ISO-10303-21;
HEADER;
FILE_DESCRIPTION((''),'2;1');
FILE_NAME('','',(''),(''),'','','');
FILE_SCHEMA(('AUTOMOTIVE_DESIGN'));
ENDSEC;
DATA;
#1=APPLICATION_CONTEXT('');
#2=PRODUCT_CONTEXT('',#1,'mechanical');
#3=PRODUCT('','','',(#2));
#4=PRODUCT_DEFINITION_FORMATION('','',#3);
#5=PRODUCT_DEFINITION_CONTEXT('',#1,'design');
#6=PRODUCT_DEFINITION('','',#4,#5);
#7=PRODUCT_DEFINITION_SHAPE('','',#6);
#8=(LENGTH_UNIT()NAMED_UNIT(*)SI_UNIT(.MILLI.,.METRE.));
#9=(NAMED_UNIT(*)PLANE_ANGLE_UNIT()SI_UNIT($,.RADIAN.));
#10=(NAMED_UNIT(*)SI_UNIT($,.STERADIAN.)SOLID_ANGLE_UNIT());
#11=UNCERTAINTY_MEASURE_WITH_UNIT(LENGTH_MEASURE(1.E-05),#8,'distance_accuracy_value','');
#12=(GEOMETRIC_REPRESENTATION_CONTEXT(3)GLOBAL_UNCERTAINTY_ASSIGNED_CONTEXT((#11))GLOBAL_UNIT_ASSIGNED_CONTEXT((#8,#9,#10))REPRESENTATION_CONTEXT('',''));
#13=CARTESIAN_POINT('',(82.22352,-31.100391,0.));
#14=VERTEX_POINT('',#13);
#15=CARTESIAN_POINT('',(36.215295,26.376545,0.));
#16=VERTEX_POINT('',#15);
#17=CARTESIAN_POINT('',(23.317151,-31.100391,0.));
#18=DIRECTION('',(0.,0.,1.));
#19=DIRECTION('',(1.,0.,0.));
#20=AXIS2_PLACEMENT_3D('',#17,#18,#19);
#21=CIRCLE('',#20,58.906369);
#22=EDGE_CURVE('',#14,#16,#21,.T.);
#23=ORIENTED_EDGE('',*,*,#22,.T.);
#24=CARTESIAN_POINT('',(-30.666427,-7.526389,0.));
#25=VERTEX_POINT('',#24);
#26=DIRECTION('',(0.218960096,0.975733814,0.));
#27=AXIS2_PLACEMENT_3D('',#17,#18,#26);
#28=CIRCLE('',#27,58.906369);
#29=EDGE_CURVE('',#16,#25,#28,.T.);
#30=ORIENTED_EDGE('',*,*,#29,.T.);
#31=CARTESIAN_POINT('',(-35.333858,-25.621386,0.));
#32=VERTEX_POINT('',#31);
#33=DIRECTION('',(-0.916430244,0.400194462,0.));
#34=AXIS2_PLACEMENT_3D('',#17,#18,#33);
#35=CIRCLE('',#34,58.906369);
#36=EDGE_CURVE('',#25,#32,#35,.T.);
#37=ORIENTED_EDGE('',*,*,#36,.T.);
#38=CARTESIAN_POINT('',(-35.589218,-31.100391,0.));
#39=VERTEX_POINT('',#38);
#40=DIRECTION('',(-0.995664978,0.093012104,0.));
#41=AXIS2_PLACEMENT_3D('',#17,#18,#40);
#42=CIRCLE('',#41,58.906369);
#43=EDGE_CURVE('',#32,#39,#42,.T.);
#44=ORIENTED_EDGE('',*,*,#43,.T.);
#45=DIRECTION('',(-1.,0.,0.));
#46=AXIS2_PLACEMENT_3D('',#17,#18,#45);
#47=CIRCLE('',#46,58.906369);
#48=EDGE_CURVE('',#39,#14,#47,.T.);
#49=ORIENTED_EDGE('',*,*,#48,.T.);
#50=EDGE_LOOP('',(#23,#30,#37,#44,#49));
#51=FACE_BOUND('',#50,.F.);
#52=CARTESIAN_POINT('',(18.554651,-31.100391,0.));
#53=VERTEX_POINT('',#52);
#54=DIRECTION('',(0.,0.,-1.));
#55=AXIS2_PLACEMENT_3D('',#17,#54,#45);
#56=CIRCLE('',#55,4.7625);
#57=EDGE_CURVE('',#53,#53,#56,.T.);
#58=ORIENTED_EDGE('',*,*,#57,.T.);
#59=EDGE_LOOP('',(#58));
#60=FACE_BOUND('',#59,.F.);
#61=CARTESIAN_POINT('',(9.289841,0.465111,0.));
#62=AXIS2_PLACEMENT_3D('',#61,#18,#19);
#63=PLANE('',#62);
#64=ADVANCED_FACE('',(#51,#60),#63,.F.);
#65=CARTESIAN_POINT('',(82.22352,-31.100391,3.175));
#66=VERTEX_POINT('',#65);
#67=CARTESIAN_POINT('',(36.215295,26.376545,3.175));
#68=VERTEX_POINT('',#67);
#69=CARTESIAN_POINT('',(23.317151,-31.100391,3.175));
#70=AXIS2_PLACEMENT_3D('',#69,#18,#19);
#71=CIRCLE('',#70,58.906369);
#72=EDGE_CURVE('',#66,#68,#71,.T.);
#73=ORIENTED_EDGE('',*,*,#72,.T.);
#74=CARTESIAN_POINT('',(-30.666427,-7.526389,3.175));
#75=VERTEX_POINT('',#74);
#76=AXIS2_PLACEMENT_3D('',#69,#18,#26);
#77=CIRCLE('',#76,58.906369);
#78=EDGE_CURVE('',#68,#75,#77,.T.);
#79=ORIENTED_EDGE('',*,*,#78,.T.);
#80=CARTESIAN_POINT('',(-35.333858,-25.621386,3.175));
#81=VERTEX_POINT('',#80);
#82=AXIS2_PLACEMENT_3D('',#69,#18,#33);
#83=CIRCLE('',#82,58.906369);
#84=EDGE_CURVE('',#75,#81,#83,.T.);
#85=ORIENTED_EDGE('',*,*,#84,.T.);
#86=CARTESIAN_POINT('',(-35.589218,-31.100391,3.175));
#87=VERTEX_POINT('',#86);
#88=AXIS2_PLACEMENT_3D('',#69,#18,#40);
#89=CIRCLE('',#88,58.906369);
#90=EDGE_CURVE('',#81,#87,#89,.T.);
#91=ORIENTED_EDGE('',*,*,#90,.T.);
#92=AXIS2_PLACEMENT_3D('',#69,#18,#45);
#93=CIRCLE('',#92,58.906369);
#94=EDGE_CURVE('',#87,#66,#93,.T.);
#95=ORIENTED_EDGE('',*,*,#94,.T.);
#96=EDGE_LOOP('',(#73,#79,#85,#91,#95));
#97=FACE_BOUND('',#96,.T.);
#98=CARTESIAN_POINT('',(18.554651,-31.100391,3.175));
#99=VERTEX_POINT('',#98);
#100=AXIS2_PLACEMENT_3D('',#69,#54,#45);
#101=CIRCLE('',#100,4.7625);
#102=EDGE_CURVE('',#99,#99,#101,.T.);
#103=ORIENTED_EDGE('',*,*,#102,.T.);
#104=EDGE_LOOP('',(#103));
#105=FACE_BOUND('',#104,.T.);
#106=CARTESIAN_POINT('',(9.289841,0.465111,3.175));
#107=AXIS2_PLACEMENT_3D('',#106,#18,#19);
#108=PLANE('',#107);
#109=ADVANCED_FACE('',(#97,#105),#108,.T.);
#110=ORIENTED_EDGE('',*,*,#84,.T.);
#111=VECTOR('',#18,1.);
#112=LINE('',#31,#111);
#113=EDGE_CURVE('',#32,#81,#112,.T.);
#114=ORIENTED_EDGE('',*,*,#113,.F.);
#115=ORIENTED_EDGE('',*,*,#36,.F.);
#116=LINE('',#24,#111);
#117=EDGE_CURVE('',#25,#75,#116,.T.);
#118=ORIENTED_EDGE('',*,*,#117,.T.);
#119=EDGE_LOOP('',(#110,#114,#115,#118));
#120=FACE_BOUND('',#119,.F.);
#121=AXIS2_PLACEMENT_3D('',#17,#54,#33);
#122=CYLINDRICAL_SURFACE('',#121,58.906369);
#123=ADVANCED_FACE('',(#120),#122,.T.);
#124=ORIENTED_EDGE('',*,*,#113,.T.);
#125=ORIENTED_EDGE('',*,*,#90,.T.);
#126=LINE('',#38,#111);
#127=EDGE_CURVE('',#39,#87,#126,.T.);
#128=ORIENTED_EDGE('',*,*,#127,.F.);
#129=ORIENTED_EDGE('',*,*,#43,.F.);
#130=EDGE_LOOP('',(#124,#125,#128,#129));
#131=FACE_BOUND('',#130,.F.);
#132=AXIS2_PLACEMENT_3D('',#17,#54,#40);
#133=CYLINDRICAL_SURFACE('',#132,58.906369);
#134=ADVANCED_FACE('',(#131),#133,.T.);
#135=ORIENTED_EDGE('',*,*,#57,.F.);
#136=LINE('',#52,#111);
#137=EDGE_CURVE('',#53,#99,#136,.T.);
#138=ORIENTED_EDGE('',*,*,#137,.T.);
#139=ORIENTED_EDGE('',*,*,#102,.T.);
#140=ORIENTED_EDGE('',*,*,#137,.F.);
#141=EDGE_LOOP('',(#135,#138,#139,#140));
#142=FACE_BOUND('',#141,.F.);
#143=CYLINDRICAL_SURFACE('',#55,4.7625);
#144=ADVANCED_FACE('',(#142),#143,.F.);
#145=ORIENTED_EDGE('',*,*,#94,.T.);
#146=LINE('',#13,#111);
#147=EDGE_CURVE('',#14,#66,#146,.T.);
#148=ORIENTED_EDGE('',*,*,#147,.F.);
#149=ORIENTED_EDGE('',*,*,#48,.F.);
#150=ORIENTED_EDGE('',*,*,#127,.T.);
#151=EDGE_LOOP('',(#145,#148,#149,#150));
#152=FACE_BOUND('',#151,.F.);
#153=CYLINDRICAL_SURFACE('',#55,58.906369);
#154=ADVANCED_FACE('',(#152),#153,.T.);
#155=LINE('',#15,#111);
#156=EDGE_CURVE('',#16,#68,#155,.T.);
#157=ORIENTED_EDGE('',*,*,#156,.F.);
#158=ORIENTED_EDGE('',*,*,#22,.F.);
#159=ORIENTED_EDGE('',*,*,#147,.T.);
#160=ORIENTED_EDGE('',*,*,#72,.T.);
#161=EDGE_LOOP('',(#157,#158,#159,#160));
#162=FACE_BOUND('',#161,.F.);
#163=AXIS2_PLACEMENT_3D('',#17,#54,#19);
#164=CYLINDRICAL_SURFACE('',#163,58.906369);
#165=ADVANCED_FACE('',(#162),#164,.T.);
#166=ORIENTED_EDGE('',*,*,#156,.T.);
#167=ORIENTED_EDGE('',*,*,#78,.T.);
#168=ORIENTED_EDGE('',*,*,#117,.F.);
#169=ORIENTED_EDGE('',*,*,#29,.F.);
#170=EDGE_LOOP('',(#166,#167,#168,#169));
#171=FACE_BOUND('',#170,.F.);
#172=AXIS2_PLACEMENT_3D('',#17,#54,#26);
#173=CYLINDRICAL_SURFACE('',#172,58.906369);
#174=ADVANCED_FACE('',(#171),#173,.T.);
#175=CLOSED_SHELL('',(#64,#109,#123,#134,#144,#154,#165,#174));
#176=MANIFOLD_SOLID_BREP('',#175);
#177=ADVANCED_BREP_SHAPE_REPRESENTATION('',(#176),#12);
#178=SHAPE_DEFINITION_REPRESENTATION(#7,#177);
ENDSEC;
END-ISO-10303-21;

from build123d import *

# Parameters (mm, degrees)
F1_DEPTH = 3.175


# Not quite as in the source:
# - a length typed as a fraction of an inch, garbled in the dataset ("3 / 203.2 mm" for 3/8 in), is restored
# - a feature names something its author has since deleted; it is built from what else it names


with BuildPart() as f1:
    # F0 (on Top) → F1 (new body)
    with BuildSketch(Plane.XY):
        with BuildLine():
            Line((-12.6873488794, 5.5338457858), (-12.6873488794, -31.1003914823))
            ThreePointArc((-12.6873488794, -31.1003914823), (16.4381102813, -21.6348312874), (34.4341148999, 3.1448583573))
            ThreePointArc((34.4341148999, 3.1448583573), (36.2459189148, 10.6981520789), (36.8548431206, 18.4418005177))
            ThreePointArc((36.8548431206, 18.4418005177), (36.6946973558, 22.4220389265), (36.2152954077, 26.3765449929))
            ThreePointArc((36.2152954077, 26.3765449929), (10.5526750719, 26.4063777177), (-12.6873488794, 15.5218814393))
            Line((-12.6873488794, 15.5218814393), (-12.6873488794, 5.5338457858))
        make_face()
        with BuildLine():
            ThreePointArc((34.4341148999, 3.1448583573), (44.4839092315, -60.225850643), (-12.6873488794, -31.1003914823))
            Line((-12.6873488794, -31.1003914823), (-35.5892182517, -31.1003914823))
            ThreePointArc((-35.5892182517, -31.1003914823), (23.3171511206, -90.0067608546), (82.2235204929, -31.1003914823))
            ThreePointArc((82.2235204929, -31.1003914823), (69.3048842905, 5.7111386477), (36.2152954077, 26.3765449929))
            ThreePointArc((36.2152954077, 26.3765449929), (36.6946973558, 22.4220389265), (36.8548431206, 18.4418005177))
            ThreePointArc((36.8548431206, 18.4418005177), (36.2459189148, 10.6981520789), (34.4341148999, 3.1448583573))
        make_face()
        with BuildLine():
            ThreePointArc((34.4341148999, 3.1448583573), (16.4381102813, -21.6348312874), (-12.6873488794, -31.1003914823))
            ThreePointArc((-12.6873488794, -31.1003914823), (44.4839092315, -60.225850643), (34.4341148999, 3.1448583573))
        make_face()
        with BuildLine():
            ThreePointArc((28.0796511206, -31.1003914823), (23.3171511206, -35.8628914823), (18.5546511206, -31.1003914823))
            ThreePointArc((18.5546511206, -31.1003914823), (23.3171511206, -26.3378914823), (28.0796511206, -31.1003914823))
        make_face(mode=Mode.SUBTRACT)
        with BuildLine():
            ThreePointArc((-35.3338578497, -25.6213861535), (-24.3372830845, -29.7111622279), (-12.6873488794, -31.1003914823))
            Line((-12.6873488794, -31.1003914823), (-12.6873488794, 5.5338457858))
            Line((-12.6873488794, 5.5338457858), (-30.6664273508, -7.5263886814))
            ThreePointArc((-30.6664273508, -7.5263886814), (-33.7222633699, -16.3876233128), (-35.3338578497, -25.6213861535))
        make_face()
        with BuildLine():
            Line((-35.5892182517, -31.1003914823), (-12.6873488794, -31.1003914823))
            ThreePointArc((-12.6873488794, -31.1003914823), (-24.3372830845, -29.7111622279), (-35.3338578497, -25.6213861535))
            ThreePointArc((-35.3338578497, -25.6213861535), (-35.5253435202, -28.3579150318), (-35.5892182517, -31.1003914823))
        make_face()
        with BuildLine():
            Line((-30.6664273508, -7.5263886814), (-12.6873488794, 5.5338457858))
            Line((-12.6873488794, 5.5338457858), (-12.6873488794, 15.5218814393))
            ThreePointArc((-12.6873488794, 15.5218814393), (-23.129261611, 5.1306876763), (-30.6664273508, -7.5263886814))
        make_face()
    extrude(amount=F1_DEPTH)


solid = f1.part
